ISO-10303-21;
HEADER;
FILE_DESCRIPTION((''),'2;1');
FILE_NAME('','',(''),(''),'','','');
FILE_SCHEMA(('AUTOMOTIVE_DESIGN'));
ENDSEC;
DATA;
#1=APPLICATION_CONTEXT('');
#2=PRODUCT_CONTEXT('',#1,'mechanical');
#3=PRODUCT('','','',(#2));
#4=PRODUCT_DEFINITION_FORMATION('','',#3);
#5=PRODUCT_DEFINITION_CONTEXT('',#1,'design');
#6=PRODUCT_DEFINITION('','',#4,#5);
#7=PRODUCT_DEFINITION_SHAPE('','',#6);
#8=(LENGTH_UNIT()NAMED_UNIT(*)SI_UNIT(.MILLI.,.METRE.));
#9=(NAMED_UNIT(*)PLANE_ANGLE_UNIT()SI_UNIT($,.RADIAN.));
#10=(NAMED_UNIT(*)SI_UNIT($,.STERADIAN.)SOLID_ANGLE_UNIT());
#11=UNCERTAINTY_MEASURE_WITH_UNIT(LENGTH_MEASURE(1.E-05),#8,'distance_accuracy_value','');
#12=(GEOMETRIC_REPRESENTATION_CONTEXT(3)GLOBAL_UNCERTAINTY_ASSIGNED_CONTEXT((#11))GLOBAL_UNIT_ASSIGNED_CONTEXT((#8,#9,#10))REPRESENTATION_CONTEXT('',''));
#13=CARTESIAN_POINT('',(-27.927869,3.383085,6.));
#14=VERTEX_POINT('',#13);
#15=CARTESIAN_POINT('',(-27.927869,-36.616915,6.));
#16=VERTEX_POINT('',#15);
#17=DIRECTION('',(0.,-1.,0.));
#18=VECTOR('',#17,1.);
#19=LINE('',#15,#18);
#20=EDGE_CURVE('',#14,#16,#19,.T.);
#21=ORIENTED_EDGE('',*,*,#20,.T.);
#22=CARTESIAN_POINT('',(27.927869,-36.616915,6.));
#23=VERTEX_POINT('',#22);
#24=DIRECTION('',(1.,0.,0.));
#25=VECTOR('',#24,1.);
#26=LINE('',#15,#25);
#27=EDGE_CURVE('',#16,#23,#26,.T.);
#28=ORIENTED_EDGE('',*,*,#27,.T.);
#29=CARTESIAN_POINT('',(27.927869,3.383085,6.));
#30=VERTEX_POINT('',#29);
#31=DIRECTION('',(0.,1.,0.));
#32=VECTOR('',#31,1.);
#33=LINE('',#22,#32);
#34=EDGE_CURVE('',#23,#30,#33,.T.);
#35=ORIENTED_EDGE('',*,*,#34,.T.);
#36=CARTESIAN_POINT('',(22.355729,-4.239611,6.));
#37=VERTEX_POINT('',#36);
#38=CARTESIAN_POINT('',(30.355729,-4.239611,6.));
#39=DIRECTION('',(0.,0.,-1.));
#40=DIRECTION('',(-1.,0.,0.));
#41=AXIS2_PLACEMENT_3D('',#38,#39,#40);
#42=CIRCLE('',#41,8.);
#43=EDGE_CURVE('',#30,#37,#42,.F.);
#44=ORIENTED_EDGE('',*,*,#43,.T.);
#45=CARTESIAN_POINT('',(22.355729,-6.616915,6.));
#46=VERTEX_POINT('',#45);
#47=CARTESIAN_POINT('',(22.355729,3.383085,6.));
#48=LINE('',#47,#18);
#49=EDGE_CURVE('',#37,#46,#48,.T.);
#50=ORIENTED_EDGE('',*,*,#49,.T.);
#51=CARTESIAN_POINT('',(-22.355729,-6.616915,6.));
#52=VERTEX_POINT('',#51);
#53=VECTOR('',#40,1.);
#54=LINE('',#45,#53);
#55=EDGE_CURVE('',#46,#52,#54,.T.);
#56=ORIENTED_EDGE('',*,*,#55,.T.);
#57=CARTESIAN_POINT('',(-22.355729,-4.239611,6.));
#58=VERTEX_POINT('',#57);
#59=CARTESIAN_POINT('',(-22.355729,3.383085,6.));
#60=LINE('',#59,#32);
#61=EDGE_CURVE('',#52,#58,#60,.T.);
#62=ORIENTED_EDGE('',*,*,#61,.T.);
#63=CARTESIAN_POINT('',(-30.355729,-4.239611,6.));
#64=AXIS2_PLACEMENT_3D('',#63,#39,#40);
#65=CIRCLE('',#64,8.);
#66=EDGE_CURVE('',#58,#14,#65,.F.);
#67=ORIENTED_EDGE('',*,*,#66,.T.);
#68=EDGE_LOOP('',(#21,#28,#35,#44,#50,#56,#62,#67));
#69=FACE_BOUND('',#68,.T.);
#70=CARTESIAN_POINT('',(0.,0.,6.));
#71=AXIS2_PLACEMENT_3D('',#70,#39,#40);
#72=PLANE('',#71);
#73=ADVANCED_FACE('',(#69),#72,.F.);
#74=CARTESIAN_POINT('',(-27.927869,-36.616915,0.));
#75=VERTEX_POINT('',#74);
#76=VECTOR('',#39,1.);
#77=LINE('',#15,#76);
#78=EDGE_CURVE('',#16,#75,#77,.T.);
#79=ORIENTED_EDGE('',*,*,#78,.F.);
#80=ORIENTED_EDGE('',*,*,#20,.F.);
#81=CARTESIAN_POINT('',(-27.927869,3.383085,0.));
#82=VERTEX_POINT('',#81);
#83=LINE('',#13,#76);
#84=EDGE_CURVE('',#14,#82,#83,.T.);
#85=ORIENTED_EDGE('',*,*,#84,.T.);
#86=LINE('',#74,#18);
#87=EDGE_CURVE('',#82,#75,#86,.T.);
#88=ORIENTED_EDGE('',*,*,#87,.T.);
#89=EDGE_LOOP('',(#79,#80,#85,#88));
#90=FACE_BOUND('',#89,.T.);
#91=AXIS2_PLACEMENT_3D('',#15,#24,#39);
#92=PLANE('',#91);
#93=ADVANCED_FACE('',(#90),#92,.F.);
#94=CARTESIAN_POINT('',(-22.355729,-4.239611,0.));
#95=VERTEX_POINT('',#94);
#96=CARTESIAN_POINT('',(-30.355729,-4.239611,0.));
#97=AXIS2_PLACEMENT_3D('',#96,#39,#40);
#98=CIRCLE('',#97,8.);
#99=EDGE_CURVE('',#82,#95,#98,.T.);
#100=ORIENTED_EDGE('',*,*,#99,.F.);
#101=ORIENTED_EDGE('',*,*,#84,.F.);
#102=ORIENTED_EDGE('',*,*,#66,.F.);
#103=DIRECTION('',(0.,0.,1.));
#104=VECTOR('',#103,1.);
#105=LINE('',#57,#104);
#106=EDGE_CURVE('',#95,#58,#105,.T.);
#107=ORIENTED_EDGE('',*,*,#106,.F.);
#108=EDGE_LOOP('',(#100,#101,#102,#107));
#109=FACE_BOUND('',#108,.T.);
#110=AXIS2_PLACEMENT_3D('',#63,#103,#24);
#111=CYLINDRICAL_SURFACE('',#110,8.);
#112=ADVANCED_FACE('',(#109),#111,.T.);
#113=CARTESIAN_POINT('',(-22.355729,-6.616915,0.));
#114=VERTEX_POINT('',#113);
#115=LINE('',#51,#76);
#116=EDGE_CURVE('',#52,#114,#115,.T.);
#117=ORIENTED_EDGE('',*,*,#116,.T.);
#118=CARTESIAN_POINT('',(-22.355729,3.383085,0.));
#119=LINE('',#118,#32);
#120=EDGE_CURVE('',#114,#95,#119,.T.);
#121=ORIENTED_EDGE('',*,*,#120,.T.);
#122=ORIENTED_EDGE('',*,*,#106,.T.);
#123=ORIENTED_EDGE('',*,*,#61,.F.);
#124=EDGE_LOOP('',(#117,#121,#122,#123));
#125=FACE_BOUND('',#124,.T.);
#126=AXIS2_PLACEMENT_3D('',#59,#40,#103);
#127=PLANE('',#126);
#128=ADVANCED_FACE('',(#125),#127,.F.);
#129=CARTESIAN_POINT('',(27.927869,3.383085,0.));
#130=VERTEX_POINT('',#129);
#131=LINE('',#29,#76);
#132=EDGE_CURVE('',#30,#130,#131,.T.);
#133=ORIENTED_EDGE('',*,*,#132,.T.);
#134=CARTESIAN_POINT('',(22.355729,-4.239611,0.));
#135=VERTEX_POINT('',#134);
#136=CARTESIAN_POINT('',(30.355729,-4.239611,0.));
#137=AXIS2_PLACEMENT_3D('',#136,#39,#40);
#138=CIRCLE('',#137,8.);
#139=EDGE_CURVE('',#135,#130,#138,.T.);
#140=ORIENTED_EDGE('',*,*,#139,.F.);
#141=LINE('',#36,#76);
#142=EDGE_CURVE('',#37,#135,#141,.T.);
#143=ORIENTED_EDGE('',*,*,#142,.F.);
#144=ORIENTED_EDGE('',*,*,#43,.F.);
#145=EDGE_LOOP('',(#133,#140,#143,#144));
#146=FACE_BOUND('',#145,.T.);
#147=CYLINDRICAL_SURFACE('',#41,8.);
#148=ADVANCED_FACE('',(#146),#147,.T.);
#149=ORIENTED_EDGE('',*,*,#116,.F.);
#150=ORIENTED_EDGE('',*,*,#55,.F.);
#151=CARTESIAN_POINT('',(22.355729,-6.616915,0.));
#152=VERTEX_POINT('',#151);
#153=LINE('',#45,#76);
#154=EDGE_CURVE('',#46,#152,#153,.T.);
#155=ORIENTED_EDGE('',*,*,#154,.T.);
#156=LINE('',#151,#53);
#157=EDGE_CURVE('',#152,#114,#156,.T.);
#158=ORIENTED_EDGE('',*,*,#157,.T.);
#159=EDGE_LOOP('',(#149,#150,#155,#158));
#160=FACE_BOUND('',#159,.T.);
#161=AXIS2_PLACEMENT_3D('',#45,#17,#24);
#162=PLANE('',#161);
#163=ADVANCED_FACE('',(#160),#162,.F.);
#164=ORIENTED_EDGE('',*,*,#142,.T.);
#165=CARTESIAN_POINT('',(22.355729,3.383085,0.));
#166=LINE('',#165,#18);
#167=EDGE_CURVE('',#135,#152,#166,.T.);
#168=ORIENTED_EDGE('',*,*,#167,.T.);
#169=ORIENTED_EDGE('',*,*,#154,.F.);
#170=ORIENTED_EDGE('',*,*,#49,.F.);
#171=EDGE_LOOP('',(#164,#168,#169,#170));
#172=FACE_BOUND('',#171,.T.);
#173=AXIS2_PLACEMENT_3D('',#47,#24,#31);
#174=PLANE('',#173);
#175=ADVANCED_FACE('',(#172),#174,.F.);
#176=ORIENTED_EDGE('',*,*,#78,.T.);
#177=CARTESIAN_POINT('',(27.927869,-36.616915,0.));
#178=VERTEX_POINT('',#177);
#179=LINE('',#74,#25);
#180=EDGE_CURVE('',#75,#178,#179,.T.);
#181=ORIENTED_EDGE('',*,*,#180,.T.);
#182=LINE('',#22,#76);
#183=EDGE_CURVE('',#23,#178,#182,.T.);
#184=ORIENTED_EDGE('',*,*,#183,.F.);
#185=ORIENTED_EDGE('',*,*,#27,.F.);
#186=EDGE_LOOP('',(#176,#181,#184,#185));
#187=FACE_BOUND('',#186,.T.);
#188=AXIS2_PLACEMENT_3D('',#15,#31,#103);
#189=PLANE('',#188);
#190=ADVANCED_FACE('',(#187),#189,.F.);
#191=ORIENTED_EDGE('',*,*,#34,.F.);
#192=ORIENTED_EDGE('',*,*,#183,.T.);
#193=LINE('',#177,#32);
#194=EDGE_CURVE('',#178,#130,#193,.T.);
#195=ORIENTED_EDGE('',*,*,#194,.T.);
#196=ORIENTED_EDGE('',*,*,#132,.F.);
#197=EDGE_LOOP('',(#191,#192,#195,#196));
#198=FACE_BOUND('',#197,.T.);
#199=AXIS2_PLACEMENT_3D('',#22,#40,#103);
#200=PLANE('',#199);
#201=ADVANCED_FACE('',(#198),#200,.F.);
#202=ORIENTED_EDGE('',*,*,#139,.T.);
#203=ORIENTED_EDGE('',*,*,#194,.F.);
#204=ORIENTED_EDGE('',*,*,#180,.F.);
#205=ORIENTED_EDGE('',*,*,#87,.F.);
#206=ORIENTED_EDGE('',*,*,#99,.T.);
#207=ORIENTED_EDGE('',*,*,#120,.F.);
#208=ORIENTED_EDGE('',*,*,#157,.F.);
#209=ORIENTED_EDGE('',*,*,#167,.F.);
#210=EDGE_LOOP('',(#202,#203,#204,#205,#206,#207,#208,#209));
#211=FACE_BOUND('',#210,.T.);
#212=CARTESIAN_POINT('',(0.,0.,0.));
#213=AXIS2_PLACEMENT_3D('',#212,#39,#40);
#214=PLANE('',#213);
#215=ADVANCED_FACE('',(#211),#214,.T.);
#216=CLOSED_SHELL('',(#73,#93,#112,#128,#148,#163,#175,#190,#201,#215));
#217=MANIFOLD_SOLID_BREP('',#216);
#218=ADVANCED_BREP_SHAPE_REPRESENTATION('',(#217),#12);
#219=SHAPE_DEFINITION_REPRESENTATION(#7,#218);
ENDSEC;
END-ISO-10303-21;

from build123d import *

# Parameters (mm, degrees)
BOSS_EXTRUDE1_DEPTH = 6
FILLET7_R           = 8
FILLET8_R           = 8


with BuildPart() as part:
    # Sketch1 → Boss-Extrude1 (new body)
    with BuildSketch(Plane.XY):
        Polygon((-27.927868544, -36.616915423), (27.927868544, -36.616915423), (27.927868544, 3.383084577), (22.35572924, 3.383084577), (22.35572924, -6.616915423), (-22.35572924, -6.616915423), (-22.35572924, 3.383084577), (-27.927868544, 3.383084577), align=None)
    extrude(amount=BOSS_EXTRUDE1_DEPTH)

    # Fillet7
    # the kernel refuses this fillet: 8 mm, written as the material it takes off along each edge
    with BuildSketch(Plane(origin=(-22.35572924, 3.383084577, -19.056739693), x_dir=(0, -1, 0), z_dir=(0, 0, 1))) as fillet7_piece_1:
        with BuildLine():
            CenterArc((7.622695877, -8), FILLET7_R, 90, 72.333104018)
            Line((0, -5.572139303), (-0.152453918, -5.52358209))
            ThreePointArc((-0.152453918, -5.52358209), (-0.16, -2.786069652), (-0.16, 0))
            Line((-0.16, 0), (0, 0.16))
            Line((0, 0.16), (7.622695877, 0.16))
            Line((7.622695877, 0.16), (7.622695877, 0))
        make_face()
    extrude(amount=44.113479387, mode=Mode.SUBTRACT)

    # Fillet8
    # the kernel refuses this fillet: 8 mm, written as the material it takes off along each edge
    with BuildSketch(Plane(origin=(22.35572924, 3.383084577, -19.056739693), x_dir=(1, 0, 0), z_dir=(0, 0, 1))) as fillet8_piece_1:
        with BuildLine():
            CenterArc((8, -7.622695877), FILLET8_R, 107.666895982, 72.333104018)
            Line((0, -7.622695877), (-0.16, -7.622695877))
            Line((-0.16, -7.622695877), (-0.16, 0))
            Line((-0.16, 0), (0, 0.16))
            ThreePointArc((0, 0.16), (2.786069652, 0.16), (5.52358209, 0.152453918))
            Line((5.52358209, 0.152453918), (5.572139303, 0))
        make_face()
    extrude(amount=44.113479387, mode=Mode.SUBTRACT)


solid = part.part
